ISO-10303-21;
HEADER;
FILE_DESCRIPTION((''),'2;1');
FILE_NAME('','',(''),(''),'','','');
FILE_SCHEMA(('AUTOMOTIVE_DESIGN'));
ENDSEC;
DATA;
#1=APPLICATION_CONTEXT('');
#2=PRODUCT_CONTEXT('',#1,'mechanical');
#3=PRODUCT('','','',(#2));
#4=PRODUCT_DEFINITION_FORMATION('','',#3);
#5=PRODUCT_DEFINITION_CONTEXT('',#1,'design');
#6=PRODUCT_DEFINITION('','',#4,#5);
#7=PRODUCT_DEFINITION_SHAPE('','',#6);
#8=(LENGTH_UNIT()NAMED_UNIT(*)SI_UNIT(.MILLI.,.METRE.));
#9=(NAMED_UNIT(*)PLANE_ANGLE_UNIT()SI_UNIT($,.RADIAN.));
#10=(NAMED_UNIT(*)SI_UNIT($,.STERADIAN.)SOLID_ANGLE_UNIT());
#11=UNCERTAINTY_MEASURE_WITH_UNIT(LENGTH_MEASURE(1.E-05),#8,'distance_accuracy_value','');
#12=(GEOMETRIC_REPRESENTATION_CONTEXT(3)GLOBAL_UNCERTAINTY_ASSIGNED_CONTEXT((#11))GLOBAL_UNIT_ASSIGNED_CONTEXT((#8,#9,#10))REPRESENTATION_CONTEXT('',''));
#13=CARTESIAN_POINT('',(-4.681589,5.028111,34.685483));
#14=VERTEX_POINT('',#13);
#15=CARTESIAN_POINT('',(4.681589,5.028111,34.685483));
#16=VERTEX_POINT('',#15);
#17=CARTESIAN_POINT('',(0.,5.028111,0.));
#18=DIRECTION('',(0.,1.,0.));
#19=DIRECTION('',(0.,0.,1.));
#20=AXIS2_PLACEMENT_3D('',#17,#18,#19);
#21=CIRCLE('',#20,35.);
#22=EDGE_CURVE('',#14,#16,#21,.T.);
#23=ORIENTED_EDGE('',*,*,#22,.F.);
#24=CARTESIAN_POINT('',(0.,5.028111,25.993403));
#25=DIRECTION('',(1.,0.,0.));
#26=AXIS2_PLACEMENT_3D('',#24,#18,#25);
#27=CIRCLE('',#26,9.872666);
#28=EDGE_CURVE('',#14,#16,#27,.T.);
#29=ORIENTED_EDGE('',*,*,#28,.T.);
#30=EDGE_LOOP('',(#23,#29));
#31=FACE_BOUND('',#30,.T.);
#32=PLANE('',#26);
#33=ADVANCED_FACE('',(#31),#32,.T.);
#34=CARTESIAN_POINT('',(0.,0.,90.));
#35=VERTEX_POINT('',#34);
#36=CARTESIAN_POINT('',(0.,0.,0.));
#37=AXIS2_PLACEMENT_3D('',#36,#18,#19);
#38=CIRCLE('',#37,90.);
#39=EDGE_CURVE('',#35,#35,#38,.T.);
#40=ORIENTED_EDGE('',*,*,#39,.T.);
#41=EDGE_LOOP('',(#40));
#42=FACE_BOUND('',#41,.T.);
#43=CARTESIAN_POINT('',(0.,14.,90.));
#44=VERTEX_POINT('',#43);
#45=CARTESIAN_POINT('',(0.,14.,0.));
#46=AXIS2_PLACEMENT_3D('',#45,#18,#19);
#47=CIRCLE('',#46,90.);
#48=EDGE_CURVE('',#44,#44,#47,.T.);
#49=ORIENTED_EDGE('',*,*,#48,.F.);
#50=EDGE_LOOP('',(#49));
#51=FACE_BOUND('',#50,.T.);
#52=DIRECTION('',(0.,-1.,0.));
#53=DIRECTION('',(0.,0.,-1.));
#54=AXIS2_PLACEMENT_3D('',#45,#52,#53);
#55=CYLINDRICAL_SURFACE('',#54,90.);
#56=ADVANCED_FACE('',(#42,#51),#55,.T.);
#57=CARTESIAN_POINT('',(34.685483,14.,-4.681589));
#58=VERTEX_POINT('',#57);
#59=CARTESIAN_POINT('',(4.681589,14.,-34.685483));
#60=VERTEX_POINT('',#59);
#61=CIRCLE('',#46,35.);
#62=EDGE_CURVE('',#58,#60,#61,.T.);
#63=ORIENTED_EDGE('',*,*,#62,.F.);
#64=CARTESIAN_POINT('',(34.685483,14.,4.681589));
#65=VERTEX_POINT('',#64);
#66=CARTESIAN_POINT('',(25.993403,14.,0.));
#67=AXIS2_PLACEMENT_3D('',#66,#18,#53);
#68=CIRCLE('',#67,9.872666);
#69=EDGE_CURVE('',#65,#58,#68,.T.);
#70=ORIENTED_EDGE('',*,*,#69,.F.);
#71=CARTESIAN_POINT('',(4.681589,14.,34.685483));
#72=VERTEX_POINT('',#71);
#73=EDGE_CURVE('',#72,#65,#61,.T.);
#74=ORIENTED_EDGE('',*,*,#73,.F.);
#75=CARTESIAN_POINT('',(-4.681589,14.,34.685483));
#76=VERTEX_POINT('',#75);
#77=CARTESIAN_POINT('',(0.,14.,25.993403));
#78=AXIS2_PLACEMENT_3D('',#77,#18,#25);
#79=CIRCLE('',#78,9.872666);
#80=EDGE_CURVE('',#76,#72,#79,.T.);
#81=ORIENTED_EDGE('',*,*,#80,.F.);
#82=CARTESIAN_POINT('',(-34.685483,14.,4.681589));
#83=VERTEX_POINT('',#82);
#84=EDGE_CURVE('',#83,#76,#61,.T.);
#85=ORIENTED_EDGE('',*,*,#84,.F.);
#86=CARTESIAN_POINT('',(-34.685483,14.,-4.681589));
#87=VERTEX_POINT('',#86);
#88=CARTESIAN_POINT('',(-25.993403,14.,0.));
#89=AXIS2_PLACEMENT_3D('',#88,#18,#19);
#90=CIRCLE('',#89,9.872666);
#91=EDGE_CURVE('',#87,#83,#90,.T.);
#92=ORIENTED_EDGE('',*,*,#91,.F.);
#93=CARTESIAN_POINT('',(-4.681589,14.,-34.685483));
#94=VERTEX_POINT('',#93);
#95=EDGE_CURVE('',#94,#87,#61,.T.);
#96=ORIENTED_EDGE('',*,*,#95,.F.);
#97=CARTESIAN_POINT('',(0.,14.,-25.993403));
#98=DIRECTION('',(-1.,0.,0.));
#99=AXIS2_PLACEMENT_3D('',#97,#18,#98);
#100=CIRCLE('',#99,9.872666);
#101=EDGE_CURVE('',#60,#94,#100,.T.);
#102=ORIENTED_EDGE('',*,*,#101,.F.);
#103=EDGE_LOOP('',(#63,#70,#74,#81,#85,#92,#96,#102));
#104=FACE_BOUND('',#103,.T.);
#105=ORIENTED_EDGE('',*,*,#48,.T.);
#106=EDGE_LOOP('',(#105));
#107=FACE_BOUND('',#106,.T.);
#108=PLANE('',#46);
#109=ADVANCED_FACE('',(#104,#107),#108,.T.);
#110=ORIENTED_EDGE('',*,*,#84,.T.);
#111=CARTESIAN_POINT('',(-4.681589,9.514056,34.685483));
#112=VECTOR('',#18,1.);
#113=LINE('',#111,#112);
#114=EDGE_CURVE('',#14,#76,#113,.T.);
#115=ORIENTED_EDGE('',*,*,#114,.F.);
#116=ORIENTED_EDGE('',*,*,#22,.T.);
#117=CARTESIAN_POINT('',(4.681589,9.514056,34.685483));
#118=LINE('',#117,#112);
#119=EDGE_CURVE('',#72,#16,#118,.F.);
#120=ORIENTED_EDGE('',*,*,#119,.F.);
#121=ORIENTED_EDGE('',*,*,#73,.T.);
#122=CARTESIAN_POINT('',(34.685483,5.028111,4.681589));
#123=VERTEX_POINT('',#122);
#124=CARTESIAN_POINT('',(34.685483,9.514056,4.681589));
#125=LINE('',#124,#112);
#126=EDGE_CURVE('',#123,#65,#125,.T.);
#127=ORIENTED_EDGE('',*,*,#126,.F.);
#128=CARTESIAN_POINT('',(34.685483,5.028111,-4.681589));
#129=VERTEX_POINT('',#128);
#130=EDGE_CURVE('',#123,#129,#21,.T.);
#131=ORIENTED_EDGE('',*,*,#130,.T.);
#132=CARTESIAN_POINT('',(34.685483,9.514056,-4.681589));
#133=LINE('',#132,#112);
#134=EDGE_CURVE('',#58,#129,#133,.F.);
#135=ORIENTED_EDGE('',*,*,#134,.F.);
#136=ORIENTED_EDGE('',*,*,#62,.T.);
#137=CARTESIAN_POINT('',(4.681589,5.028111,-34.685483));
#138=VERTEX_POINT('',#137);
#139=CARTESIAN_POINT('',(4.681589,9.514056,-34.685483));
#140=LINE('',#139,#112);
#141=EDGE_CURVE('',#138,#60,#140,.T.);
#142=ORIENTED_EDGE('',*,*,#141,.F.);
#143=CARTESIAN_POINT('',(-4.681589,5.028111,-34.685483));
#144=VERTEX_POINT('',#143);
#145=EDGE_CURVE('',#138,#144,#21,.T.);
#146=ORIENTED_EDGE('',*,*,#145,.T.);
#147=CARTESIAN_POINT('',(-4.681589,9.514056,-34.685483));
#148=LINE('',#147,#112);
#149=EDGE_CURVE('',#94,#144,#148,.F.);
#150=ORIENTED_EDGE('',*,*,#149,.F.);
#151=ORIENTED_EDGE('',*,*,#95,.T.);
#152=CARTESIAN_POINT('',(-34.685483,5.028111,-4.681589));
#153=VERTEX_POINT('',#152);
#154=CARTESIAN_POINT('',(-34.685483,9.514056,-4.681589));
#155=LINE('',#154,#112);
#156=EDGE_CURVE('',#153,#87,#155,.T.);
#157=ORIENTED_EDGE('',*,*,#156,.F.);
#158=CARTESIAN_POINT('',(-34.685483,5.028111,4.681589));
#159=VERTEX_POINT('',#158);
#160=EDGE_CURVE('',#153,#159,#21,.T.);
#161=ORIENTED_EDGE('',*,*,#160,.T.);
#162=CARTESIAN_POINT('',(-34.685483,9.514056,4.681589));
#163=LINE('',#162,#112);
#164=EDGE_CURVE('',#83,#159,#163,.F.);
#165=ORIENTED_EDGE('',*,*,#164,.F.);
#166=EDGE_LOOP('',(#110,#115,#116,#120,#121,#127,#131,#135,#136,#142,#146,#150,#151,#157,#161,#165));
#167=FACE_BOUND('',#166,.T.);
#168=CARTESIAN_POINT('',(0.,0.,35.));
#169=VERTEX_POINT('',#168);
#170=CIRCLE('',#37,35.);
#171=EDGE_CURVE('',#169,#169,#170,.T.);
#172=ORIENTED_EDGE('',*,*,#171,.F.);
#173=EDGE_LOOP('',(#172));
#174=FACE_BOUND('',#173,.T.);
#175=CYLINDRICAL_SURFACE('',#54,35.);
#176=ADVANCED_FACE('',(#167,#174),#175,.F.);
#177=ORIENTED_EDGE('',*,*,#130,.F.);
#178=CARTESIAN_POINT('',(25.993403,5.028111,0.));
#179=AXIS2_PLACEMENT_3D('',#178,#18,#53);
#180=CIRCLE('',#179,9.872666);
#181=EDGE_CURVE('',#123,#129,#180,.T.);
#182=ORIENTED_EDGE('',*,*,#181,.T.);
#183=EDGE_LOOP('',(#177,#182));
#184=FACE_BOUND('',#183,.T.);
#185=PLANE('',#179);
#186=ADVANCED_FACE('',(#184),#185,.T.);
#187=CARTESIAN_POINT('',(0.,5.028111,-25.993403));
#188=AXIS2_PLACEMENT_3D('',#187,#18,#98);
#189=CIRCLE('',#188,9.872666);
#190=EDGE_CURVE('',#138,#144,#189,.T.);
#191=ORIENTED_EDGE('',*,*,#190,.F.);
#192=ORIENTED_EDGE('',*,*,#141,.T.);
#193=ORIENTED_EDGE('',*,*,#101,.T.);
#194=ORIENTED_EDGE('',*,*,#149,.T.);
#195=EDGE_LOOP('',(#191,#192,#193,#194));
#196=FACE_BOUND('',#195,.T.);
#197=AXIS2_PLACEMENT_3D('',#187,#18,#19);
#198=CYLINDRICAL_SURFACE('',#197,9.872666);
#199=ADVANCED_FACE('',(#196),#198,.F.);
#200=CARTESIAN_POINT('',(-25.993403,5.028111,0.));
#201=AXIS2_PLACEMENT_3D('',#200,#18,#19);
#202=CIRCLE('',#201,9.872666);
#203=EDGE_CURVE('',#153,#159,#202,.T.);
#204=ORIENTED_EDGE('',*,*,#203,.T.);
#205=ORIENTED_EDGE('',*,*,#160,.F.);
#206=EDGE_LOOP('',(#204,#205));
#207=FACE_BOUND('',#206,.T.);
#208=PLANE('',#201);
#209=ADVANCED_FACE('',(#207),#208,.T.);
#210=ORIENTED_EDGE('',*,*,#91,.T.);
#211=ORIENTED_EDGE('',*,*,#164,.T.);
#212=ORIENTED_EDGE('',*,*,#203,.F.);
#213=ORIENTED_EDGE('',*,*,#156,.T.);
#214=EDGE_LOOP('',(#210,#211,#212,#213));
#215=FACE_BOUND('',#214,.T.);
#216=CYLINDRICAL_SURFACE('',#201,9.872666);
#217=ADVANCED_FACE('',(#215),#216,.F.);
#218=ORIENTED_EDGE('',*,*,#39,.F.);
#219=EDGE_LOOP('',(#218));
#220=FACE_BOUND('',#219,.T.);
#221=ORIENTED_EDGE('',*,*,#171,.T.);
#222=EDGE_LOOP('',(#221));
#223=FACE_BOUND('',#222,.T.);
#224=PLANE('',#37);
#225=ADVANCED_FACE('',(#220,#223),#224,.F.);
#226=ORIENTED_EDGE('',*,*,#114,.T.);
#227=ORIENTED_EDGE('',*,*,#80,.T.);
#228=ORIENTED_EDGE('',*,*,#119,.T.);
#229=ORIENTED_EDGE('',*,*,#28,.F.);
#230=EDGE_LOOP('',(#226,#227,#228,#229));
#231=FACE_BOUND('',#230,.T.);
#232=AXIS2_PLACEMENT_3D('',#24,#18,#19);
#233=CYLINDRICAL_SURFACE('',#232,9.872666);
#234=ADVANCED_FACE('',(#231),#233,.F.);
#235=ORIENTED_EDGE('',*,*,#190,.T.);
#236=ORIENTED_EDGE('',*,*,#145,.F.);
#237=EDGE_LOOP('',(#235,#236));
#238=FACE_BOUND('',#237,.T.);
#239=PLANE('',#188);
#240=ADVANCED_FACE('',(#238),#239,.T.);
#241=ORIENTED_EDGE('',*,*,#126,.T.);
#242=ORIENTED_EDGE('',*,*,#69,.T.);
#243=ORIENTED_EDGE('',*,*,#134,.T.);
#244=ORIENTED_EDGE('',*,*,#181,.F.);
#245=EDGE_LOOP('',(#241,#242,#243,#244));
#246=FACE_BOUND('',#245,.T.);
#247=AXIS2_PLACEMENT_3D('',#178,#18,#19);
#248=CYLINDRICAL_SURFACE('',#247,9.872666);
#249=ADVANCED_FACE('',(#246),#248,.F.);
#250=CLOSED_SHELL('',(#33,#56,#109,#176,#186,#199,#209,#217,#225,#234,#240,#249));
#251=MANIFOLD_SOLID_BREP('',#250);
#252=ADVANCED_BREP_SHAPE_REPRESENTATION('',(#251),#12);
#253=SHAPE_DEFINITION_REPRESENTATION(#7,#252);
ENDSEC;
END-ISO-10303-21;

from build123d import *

# Parameters (mm, degrees)
SKETCH1_R           = 90
BOSS_EXTRUDE1_DEPTH = 14
SKETCH2_R           = 35
CUT_EXTRUDE1_DEPTH  = 129.04686642
SKETCH3_R           = 9.872665874
CUT_EXTRUDE2_DEPTH  = 8.971888535
CIRPATTERN1_COUNT   = 4


with BuildPart() as part:
    # Sketch1 → Boss-Extrude1 (new body)
    with BuildSketch(Plane(origin=(0, 0, 0), x_dir=(1, 0, 0), z_dir=(0, 1, 0))):
        Circle(SKETCH1_R)
    extrude(amount=BOSS_EXTRUDE1_DEPTH)

    # Sketch2 → Cut-Extrude1 (cut, through all)
    with BuildSketch(Plane(origin=(0, 0, 0), x_dir=(1, 0, 0), z_dir=(0, 1, 0))):
        Circle(SKETCH2_R)
    extrude(amount=CUT_EXTRUDE1_DEPTH, mode=Mode.SUBTRACT)

    # Sketch3 → Cut-Extrude2 (cut)
    with BuildSketch(Plane(origin=(0, 14, 0), x_dir=(1, 0, 0), z_dir=(0, 1, 0))):
        with Locations((-25.993402963, 0)):
            Circle(SKETCH3_R)
    cut_extrude2 = extrude(amount=-CUT_EXTRUDE2_DEPTH, mode=Mode.SUBTRACT)

    # CirPattern1: Cut-Extrude2 ×4 about axis
    cirpattern1_axis = Axis((0, 0, 0), (0, 1, 0))
    for i in range(1, CIRPATTERN1_COUNT):
        add(cut_extrude2.rotate(cirpattern1_axis, i * 360 / CIRPATTERN1_COUNT), mode=Mode.SUBTRACT)


solid = part.part
